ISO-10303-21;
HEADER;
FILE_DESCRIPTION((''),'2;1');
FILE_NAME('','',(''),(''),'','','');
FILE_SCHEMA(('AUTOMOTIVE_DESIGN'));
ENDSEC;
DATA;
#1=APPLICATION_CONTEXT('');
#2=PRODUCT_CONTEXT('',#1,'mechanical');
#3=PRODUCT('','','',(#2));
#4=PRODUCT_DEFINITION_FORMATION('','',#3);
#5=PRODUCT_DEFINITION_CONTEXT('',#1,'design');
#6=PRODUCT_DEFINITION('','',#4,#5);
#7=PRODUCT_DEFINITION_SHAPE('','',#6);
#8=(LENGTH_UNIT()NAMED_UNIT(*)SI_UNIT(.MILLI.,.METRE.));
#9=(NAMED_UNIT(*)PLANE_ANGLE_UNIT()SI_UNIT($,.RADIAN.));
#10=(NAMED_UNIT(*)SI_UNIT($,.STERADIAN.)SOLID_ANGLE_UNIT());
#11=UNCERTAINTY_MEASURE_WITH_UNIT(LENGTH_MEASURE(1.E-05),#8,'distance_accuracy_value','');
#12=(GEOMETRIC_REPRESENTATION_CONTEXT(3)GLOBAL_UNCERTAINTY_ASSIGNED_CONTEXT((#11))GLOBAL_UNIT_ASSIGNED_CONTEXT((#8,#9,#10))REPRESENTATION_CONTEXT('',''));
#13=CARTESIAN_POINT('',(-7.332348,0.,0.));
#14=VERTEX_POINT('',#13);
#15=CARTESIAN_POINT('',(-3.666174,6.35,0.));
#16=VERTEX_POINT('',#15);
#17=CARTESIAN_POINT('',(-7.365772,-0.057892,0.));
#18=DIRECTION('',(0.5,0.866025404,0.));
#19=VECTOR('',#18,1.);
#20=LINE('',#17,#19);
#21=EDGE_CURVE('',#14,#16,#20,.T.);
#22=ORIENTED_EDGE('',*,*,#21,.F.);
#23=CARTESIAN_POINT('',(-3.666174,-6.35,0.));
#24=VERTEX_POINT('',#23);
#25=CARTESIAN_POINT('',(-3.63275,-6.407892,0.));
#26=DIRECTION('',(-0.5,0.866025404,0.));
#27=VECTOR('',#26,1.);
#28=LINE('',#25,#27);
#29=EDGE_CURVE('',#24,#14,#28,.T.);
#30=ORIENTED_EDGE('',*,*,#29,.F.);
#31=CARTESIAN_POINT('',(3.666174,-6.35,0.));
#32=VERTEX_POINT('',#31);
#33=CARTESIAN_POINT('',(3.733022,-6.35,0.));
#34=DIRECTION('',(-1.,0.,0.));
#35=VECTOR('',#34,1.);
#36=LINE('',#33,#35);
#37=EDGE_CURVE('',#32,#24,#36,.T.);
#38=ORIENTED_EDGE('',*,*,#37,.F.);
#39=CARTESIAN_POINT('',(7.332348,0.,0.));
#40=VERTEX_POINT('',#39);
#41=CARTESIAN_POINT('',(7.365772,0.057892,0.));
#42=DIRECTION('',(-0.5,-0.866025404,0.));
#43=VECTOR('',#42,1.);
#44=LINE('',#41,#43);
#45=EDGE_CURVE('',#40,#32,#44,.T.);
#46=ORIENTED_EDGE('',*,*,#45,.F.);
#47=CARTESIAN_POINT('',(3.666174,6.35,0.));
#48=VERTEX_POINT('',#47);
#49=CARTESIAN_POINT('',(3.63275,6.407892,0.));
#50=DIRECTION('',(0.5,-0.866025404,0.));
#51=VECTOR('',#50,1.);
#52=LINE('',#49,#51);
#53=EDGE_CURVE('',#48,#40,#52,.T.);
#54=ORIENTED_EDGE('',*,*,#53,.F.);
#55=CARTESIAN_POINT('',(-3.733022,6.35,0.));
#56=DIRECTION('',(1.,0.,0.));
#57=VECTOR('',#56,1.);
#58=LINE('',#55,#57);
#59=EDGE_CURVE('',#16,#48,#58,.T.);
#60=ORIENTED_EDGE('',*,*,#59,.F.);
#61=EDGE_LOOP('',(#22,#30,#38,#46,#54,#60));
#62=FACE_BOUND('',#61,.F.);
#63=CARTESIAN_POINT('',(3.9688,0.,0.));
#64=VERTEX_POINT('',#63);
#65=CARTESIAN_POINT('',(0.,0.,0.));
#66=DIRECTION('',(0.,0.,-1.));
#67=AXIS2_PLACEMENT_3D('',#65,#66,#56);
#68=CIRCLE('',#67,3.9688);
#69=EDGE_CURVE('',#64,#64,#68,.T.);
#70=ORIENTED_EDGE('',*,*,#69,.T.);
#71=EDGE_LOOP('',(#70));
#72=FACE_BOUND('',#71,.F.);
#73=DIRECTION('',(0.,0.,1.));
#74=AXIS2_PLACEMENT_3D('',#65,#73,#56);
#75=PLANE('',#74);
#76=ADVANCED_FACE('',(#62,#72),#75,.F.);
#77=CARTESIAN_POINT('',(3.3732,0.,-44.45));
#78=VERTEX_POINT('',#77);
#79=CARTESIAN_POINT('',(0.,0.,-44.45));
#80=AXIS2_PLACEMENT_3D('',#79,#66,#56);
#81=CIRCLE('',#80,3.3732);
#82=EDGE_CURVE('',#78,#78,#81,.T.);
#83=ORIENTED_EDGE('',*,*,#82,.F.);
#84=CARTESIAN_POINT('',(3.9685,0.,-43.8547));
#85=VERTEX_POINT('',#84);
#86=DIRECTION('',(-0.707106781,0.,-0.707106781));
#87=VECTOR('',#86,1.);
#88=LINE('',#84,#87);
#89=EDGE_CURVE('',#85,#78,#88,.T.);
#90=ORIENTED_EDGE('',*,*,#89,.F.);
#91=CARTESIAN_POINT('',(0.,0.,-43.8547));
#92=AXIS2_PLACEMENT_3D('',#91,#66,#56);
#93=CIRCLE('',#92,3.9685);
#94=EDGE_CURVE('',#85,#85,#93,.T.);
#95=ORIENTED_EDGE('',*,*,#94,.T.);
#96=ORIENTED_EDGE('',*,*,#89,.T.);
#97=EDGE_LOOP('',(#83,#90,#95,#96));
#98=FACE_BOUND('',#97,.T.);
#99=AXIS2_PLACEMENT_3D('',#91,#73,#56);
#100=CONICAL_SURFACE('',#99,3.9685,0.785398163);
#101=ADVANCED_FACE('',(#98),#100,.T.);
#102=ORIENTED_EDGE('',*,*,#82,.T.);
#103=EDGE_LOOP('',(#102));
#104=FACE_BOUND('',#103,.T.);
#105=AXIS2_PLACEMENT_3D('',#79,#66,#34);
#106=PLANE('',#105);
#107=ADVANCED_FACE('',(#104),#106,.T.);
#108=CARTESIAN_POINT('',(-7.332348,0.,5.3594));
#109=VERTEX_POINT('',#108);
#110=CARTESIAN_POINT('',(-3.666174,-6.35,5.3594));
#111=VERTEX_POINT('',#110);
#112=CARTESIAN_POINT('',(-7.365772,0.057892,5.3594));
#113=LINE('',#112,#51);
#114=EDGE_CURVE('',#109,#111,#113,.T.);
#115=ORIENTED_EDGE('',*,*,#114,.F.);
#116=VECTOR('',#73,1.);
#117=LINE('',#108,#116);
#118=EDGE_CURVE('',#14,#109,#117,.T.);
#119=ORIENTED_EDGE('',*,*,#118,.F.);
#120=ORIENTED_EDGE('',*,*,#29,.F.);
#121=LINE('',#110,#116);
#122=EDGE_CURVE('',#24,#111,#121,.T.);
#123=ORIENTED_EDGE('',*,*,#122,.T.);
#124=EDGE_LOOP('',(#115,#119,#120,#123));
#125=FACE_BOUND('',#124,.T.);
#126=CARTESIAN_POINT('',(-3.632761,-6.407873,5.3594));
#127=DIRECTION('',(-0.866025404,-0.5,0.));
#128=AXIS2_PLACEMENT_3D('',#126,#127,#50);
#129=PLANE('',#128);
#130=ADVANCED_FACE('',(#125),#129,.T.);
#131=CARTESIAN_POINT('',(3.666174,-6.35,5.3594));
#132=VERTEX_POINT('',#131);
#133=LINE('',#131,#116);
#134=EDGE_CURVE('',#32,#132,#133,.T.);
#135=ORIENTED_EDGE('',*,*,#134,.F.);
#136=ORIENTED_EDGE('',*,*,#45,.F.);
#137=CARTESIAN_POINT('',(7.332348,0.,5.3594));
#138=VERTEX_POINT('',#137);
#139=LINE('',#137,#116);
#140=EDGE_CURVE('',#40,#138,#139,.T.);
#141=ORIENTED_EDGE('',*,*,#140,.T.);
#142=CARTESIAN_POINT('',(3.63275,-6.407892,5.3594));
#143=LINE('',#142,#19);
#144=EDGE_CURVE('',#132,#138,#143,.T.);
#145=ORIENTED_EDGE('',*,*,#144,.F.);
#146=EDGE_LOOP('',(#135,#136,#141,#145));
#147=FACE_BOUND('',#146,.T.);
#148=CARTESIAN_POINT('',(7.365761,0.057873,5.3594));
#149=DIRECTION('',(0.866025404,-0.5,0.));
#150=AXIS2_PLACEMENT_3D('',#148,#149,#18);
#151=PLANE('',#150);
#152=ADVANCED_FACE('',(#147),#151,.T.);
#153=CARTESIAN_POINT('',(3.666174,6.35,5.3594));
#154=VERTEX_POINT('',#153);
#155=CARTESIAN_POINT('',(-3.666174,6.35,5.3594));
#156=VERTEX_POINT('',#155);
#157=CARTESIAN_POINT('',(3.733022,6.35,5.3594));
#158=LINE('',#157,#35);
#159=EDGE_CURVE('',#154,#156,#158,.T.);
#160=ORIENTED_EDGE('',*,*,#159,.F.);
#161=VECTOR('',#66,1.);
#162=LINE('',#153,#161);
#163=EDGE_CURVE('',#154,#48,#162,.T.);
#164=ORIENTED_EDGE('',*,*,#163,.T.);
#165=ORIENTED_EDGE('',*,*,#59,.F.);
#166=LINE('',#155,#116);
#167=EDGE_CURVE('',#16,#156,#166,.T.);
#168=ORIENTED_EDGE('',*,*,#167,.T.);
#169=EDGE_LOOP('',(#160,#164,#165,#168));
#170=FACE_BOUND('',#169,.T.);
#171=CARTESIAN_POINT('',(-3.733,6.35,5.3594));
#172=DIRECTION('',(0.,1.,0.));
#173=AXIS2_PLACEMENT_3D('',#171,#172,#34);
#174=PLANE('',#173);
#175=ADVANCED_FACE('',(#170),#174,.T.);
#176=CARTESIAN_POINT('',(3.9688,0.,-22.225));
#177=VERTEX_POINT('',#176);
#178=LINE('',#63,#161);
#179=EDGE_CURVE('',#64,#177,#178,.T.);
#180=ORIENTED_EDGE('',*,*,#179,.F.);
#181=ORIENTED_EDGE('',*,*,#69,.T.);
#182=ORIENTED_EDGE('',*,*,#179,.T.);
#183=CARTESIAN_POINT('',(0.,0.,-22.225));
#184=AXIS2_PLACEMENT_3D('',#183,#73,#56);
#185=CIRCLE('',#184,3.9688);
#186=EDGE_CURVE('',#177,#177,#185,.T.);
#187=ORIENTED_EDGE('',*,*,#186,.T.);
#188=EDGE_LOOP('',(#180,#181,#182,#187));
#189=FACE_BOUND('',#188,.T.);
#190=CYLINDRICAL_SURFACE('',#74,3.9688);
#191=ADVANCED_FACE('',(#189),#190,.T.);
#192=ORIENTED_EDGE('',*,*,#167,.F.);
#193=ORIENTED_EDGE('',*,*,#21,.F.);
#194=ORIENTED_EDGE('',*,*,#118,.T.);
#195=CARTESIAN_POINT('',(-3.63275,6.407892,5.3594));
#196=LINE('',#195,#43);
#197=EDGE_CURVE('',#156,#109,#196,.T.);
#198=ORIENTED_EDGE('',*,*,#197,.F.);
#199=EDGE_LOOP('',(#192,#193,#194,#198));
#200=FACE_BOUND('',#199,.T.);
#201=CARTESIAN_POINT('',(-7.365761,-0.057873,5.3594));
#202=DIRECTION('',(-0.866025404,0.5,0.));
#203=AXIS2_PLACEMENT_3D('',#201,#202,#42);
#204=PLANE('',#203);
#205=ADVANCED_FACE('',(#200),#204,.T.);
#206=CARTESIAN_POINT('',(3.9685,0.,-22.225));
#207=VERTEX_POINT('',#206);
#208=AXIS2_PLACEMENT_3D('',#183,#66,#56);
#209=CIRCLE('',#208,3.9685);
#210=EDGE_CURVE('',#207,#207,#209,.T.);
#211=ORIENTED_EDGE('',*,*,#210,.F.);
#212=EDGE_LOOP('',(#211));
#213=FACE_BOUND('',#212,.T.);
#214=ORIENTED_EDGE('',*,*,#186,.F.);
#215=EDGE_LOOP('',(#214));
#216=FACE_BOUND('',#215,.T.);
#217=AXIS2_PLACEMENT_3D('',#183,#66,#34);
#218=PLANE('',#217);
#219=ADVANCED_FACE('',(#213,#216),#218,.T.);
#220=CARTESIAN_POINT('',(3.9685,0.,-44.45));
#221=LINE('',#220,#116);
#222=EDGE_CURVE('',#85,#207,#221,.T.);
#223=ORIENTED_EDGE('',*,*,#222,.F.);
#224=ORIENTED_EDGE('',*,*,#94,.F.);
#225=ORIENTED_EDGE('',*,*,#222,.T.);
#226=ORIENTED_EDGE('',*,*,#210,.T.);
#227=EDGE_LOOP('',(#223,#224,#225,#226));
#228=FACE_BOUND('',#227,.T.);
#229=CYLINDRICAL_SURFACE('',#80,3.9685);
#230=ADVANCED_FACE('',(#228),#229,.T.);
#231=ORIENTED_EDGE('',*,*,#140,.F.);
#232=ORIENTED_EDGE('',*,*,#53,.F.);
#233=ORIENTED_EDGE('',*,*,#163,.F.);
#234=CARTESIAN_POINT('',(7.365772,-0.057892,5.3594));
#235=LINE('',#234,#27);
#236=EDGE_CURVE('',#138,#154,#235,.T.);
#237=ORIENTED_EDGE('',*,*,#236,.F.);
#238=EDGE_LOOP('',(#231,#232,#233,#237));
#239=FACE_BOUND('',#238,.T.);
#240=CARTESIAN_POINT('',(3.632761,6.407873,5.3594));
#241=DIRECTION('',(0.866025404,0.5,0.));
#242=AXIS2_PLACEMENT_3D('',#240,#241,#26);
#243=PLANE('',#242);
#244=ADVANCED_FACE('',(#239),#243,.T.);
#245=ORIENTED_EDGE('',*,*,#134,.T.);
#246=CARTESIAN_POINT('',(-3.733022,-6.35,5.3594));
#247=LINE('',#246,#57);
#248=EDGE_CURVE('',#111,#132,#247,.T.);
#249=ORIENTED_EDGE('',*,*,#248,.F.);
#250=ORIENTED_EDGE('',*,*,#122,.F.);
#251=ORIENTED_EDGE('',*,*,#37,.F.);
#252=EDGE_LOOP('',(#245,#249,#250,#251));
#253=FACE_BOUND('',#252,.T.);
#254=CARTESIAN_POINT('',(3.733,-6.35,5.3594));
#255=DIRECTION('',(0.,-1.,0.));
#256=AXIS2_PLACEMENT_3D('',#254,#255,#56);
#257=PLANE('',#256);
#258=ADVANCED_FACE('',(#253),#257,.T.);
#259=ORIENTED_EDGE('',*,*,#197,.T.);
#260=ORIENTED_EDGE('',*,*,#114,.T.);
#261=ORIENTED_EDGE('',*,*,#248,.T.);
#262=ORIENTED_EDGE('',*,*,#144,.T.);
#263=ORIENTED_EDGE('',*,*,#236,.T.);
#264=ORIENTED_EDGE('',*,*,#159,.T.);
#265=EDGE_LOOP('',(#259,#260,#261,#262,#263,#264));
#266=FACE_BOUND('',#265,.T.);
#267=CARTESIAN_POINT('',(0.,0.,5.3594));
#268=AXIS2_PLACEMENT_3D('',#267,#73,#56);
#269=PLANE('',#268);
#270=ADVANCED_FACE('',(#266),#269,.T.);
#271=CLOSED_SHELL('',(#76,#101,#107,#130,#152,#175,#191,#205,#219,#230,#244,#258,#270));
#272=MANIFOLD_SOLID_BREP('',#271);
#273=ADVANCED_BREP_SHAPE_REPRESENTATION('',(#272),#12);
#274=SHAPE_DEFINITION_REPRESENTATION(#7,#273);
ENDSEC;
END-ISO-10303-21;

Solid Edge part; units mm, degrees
sketch "Sketch1" plane through (0, 0, 0) normal (0, 0, 1) x (1, 0, 0)
  circle A0 centre (0, 0) radius 7.366
  dimension "D1" = 14.732
extrude "Protrusion1" add sketch "Sketch1" along normal blind 5.3594
sketch "Sketch2" plane through (0, 0, 0) normal (0, 0, -1) x (1, 0, 0)
  circle A0 centre (0, 0) radius 3.9688
extrude "Protrusion2" add sketch "Sketch2" along normal blind 44.45
sketch "Sketch3" plane through (0, 0, -44.45) normal (0, 0, -1) x (1, 0, 0)
  circle A0 centre (0, 0) radius 3.9685
extrude "Cutout1" cut sketch "Sketch3" against normal blind 22.225 flip side to cut
chamfer "Chamfer_1" distance 0.5953 angle 45 1 edges at (-3.9685, 0, -44.45)
sketch "Sketch4" plane through (0, 0, 5.3594) normal (0, 0, 1) x (1, 0, 0)
  line L0 (-3.733, 6.35) -> (3.733, 6.35)
  dimension "D1" = 12.7
extrude "Cutout2" cut sketch "Sketch4" against normal up to next material side at (0, 6.4, 5.3594)
pattern_circular "Pattern1" count 6 over 360 about axis through (0, 0, 5.3594) along (0, 0, 1) of "Cutout2"
properties part number "24102347"
